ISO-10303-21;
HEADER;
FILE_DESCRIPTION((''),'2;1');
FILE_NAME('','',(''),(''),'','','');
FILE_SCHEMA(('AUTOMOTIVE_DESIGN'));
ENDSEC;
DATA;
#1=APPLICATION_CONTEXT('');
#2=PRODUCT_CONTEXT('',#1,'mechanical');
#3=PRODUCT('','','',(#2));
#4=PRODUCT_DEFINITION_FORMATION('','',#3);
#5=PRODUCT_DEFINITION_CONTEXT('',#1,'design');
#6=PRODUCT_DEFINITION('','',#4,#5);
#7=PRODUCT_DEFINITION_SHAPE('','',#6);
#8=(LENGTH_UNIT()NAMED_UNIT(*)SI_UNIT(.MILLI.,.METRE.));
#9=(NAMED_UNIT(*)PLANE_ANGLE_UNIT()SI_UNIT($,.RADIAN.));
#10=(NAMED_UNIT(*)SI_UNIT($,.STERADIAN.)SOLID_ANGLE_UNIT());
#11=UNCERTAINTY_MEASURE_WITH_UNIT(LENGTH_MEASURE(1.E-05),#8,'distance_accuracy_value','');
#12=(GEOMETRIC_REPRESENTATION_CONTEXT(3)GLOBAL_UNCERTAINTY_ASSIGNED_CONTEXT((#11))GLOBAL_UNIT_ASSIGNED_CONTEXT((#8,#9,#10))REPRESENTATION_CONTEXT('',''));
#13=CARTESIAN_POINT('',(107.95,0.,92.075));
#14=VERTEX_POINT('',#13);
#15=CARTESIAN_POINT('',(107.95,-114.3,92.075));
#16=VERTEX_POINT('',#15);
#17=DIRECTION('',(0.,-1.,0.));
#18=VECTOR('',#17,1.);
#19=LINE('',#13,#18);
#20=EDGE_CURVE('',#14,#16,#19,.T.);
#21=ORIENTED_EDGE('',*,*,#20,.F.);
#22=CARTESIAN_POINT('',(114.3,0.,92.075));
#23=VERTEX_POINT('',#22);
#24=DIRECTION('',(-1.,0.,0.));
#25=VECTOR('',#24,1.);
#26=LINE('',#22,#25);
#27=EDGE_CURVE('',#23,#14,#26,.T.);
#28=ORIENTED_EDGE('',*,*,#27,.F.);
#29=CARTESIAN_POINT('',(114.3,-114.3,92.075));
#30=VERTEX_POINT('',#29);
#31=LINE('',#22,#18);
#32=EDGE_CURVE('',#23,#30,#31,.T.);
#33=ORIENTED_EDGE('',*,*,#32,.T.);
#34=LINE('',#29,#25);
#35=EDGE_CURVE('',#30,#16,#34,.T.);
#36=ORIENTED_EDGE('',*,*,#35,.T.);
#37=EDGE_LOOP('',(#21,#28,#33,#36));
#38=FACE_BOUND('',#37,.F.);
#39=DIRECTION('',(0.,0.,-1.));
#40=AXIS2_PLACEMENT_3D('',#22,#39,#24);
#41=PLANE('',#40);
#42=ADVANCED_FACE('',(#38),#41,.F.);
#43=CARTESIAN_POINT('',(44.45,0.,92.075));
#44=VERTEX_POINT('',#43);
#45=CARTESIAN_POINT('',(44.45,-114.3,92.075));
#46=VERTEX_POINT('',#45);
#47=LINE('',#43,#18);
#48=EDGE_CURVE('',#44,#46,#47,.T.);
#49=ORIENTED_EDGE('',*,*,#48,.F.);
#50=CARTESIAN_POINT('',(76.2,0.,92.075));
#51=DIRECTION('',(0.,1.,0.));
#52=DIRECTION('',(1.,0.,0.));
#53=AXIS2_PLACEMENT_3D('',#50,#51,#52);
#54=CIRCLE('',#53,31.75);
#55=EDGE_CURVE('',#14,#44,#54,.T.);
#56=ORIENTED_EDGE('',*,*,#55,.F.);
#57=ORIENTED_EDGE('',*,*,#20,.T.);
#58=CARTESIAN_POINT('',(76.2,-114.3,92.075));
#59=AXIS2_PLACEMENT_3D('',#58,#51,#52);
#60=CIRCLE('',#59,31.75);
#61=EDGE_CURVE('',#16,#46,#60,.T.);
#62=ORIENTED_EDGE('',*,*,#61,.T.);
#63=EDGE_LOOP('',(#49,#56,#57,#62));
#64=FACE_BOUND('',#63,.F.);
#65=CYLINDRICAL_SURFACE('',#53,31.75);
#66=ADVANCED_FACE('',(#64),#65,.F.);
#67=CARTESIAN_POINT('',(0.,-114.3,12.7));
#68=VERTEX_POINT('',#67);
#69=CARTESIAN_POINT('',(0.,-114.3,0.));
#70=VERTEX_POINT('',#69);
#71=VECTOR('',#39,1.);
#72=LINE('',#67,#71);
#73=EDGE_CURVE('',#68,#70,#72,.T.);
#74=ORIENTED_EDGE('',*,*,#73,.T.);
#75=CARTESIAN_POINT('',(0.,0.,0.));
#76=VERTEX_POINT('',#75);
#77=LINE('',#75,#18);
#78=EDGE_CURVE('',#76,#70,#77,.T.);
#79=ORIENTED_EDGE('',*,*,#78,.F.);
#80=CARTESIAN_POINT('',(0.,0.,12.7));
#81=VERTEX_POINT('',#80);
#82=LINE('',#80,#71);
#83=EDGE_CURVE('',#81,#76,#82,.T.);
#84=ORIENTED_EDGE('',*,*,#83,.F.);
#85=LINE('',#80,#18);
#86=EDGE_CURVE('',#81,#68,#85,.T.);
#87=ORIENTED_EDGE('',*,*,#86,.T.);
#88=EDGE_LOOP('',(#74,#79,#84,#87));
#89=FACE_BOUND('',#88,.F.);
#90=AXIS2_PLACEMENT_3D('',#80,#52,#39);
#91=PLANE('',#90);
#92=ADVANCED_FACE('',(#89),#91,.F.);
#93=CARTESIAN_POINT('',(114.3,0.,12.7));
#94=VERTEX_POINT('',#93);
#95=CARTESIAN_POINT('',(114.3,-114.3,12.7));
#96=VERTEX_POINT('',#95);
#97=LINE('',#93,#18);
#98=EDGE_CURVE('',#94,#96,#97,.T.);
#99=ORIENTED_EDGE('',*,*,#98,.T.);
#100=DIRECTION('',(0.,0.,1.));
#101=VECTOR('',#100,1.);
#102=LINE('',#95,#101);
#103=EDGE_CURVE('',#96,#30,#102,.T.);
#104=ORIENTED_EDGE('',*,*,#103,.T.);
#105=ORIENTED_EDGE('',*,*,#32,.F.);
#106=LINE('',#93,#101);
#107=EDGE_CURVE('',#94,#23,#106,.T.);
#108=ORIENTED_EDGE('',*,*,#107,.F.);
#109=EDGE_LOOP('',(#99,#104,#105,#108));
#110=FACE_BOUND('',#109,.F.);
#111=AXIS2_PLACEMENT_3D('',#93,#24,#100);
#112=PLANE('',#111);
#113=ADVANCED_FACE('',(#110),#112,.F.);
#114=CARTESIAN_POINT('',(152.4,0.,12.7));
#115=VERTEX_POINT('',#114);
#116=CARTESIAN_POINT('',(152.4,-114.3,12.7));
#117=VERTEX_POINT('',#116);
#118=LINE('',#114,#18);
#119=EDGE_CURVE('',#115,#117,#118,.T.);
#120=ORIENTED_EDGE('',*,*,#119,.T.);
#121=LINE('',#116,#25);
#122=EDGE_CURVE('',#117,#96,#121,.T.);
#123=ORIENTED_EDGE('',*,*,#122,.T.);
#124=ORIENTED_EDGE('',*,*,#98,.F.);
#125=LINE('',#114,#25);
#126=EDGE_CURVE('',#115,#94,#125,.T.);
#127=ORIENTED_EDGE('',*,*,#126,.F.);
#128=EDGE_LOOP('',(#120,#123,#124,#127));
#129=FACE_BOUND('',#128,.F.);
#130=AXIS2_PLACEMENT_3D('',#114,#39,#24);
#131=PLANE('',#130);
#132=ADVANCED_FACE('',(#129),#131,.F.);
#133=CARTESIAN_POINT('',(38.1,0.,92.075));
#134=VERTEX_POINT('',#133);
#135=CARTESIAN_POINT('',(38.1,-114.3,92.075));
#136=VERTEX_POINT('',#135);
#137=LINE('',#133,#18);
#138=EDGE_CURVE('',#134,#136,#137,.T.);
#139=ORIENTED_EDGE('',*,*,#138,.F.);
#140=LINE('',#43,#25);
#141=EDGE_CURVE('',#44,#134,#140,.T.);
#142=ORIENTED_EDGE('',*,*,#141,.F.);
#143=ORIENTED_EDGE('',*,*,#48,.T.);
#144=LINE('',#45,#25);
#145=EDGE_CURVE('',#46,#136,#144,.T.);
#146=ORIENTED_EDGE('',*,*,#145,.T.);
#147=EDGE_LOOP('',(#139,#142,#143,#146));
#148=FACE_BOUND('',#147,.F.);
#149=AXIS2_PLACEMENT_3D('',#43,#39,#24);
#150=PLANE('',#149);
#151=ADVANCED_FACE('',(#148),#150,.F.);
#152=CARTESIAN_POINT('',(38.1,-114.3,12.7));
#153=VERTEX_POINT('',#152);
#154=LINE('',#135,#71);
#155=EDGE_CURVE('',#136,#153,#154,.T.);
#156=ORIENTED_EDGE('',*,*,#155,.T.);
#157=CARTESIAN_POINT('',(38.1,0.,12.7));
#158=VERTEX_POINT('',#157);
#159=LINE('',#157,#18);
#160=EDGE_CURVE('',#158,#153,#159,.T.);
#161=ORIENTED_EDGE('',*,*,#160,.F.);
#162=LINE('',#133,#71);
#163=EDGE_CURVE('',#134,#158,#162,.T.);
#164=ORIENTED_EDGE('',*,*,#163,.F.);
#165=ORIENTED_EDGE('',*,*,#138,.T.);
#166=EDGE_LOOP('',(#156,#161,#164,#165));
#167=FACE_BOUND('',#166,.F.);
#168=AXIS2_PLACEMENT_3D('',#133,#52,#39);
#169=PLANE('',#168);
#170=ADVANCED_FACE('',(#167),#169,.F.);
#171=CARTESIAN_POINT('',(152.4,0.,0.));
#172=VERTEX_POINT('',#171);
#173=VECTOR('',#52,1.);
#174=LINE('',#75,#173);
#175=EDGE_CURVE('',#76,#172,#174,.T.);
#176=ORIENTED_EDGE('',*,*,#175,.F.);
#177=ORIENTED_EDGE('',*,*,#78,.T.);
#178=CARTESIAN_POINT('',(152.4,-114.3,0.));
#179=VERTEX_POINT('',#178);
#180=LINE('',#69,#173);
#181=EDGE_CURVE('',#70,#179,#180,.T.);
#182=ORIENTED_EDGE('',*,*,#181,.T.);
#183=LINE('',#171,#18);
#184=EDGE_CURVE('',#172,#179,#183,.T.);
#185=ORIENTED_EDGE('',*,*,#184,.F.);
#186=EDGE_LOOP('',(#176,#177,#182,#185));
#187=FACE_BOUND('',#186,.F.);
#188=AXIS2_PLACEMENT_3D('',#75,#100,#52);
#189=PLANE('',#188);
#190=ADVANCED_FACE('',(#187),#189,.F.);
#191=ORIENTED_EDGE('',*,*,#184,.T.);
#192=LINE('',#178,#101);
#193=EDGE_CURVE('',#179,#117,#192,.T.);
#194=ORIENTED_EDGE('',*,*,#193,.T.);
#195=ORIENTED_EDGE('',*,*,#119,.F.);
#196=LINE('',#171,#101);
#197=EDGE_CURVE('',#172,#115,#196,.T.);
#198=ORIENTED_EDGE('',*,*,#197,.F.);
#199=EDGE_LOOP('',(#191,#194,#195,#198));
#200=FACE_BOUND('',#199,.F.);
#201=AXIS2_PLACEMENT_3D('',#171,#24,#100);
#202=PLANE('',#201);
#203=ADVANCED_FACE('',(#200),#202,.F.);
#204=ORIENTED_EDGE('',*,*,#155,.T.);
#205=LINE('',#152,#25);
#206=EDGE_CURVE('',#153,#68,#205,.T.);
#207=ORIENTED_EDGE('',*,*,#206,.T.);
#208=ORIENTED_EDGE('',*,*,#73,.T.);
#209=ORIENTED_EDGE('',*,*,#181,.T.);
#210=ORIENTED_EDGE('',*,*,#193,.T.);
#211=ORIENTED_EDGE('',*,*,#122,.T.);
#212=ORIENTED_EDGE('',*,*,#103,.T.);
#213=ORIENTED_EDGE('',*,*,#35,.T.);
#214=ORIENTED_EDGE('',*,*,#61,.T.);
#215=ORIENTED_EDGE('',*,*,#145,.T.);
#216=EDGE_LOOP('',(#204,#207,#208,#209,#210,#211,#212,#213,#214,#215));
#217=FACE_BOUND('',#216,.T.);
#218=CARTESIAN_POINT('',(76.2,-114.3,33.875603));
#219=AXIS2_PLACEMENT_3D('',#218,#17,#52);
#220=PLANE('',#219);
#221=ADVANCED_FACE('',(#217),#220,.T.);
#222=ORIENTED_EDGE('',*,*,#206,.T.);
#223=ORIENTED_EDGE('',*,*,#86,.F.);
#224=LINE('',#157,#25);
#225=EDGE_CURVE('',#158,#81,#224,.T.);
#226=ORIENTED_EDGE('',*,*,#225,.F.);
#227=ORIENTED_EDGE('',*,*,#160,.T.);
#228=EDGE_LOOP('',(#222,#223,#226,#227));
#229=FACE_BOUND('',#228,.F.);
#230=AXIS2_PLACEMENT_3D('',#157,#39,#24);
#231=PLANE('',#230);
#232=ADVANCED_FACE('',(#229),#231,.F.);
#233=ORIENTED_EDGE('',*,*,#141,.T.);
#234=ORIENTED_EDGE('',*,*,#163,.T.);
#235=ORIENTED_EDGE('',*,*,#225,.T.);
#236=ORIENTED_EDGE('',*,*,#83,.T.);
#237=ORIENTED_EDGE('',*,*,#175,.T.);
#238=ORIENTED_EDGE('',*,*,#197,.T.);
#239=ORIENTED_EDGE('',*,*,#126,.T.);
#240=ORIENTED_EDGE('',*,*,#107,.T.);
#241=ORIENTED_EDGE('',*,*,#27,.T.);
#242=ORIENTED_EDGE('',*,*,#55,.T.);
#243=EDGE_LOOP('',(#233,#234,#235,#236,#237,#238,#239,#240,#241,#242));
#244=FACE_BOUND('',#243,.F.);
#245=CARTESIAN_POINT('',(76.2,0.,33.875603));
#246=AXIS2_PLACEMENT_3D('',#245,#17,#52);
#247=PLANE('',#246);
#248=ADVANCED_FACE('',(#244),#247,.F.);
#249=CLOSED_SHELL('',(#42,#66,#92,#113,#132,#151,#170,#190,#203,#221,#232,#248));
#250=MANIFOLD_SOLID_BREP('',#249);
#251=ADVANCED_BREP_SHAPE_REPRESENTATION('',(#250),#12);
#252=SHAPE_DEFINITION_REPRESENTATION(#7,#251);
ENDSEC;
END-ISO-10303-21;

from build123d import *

# Parameters (mm, degrees)
F1_DEPTH = 114.3


# Not quite as in the source:
# - a feature names something its author has since deleted; it is built from what else it names


with BuildPart() as f1:
    # F0 (on Front) → F1 (new body)
    with BuildSketch(Plane.XZ):
        with BuildLine():
            Line((0, 12.7), (0, 0))
            Line((0, 0), (152.4, 0))
            Line((152.4, 0), (152.4, 12.7))
            Line((152.4, 12.7), (114.3, 12.7))
            Line((114.3, 12.7), (114.3, 92.075))
            Line((114.3, 92.075), (107.95, 92.075))
            ThreePointArc((107.95, 92.075), (76.2, 60.325), (44.45, 92.075))
            Line((44.45, 92.075), (38.1, 92.075))
            Line((38.1, 92.075), (38.1, 12.7))
            Line((38.1, 12.7), (0, 12.7))
        make_face()
    extrude(amount=F1_DEPTH)


solid = f1.part
